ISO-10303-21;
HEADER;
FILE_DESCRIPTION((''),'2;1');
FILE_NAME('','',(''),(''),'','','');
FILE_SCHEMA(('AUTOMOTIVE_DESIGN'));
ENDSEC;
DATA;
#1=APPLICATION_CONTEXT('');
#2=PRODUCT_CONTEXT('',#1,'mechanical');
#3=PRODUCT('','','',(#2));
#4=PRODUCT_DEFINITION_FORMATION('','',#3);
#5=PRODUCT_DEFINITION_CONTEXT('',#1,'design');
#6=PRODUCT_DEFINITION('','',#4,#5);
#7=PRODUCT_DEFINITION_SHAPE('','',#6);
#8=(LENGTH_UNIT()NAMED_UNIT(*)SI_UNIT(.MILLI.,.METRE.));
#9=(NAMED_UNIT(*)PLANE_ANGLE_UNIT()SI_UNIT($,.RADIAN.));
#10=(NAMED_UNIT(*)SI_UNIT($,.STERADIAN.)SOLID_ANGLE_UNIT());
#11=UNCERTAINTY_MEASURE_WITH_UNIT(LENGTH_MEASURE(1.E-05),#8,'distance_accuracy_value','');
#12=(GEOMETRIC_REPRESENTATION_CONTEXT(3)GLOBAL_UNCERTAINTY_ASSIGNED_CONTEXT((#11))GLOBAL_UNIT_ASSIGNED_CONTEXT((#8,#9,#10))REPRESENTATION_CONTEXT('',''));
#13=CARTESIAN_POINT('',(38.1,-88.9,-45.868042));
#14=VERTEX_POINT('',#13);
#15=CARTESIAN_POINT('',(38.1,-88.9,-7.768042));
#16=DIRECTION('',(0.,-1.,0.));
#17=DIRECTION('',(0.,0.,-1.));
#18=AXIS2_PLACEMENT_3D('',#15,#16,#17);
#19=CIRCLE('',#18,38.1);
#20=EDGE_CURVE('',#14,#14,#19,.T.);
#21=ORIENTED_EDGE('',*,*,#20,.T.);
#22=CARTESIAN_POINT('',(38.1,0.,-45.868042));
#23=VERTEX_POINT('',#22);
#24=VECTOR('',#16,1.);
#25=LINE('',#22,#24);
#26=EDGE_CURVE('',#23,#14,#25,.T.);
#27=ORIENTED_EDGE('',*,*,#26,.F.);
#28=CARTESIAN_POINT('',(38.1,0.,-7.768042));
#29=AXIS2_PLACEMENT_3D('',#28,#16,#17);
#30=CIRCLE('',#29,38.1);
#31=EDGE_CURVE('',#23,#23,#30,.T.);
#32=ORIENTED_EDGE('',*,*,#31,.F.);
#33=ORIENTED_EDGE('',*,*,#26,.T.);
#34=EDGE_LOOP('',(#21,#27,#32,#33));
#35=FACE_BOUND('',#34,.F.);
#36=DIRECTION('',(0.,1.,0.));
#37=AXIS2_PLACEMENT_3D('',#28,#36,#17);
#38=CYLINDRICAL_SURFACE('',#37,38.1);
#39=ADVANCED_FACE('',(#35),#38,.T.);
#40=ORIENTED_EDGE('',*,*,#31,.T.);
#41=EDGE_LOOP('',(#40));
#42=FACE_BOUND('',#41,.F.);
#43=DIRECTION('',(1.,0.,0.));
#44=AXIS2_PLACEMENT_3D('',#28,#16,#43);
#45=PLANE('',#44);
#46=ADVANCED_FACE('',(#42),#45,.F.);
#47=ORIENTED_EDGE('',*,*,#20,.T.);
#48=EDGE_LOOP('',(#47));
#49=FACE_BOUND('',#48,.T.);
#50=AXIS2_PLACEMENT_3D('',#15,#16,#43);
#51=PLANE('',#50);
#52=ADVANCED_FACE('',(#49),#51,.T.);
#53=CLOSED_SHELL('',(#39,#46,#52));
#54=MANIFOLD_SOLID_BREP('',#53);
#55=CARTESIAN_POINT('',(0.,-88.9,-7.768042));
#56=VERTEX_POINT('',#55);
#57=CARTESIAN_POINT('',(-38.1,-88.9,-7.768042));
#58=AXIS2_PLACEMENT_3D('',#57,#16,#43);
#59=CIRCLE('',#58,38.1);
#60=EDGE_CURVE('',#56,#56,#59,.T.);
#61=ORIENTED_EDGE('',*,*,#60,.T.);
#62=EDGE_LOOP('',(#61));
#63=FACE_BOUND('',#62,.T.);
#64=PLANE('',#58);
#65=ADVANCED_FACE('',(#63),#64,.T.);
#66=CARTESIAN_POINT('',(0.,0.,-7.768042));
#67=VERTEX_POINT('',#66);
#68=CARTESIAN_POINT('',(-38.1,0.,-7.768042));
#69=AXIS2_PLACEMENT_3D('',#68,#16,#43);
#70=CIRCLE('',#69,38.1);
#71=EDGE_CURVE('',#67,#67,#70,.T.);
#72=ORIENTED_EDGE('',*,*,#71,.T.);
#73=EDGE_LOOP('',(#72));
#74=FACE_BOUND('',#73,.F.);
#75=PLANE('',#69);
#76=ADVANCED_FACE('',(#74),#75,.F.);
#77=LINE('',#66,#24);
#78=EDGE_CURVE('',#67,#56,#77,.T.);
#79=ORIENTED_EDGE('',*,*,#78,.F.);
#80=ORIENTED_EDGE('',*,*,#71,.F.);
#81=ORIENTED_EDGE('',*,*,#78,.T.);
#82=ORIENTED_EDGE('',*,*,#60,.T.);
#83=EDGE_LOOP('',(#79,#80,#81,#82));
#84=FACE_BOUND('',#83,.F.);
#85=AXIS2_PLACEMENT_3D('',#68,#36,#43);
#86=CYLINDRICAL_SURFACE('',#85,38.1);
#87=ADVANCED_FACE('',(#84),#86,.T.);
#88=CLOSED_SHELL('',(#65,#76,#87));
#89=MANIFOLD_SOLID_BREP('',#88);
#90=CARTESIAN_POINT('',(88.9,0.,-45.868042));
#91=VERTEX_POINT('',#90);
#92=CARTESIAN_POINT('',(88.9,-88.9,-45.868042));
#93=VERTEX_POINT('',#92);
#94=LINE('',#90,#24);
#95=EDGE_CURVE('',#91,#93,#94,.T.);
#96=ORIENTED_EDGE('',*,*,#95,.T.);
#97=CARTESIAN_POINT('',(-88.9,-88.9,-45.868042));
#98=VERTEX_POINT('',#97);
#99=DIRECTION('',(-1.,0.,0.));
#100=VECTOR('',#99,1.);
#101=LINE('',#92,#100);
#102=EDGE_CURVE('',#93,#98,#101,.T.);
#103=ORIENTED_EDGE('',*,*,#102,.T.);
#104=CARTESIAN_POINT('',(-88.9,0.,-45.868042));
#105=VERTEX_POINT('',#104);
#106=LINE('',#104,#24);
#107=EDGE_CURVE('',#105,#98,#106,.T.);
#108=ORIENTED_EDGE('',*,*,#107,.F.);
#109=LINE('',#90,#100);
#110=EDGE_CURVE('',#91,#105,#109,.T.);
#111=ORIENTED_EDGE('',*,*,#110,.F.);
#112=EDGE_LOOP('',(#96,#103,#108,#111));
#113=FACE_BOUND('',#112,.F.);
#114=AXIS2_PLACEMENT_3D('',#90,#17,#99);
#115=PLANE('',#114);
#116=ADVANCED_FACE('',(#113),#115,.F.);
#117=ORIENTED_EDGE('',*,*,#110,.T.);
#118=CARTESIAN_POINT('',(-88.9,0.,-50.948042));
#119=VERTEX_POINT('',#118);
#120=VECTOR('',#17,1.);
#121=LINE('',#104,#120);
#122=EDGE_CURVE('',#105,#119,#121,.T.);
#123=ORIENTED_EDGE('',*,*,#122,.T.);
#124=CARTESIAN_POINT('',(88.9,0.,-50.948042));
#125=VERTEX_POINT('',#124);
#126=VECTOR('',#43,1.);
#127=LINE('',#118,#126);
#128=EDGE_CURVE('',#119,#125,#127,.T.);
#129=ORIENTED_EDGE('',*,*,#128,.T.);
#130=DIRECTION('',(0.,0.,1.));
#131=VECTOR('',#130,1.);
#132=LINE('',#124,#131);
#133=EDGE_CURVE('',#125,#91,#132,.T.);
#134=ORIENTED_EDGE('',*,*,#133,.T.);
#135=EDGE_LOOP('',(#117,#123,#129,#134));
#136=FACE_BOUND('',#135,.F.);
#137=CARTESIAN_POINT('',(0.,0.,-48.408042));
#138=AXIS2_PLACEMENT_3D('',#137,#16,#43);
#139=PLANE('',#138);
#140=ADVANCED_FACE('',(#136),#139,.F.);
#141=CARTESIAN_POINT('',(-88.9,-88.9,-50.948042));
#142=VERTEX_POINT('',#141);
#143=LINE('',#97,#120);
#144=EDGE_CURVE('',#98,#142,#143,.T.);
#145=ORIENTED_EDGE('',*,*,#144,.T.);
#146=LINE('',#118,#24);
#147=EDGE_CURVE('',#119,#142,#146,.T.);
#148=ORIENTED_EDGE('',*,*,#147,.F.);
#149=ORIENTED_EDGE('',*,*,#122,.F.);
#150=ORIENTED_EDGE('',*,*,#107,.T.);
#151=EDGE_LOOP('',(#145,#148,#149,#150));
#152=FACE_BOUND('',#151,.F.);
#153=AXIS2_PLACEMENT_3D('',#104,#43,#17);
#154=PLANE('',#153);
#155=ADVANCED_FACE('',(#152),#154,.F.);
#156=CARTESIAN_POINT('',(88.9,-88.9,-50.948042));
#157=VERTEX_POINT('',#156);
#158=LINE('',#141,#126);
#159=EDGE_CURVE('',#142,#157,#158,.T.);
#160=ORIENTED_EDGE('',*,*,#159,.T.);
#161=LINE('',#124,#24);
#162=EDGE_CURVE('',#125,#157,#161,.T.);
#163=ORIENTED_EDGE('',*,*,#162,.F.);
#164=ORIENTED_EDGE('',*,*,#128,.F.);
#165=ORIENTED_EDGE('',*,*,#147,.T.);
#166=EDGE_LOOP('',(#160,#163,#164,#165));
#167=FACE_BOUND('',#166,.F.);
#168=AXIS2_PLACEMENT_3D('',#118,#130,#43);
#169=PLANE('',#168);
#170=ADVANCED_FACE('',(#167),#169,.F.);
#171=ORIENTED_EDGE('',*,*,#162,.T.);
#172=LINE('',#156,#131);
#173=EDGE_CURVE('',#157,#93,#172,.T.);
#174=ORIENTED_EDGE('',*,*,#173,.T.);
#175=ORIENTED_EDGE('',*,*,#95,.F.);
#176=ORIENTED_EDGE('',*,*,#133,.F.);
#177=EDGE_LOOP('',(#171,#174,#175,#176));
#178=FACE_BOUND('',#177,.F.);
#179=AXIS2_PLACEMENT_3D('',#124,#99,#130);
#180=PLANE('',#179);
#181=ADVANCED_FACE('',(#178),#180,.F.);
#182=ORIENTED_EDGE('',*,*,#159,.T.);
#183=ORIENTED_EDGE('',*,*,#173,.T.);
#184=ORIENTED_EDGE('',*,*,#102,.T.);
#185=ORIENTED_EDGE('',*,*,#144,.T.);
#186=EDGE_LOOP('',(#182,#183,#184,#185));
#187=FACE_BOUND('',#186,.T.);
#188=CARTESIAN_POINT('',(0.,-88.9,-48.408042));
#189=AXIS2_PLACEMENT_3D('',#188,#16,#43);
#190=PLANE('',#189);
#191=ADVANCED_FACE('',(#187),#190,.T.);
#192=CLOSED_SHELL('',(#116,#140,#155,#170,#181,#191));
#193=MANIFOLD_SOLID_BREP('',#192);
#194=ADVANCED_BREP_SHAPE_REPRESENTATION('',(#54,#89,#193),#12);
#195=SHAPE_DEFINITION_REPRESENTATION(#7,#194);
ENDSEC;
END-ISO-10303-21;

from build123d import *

# Parameters (mm, degrees)
F1_DEPTH = 88.9


# Not quite as in the source:
# - a feature names something its author has since deleted; it is built from what else it names


with BuildPart() as f1:
    # F0 (on Front) → F1 (new body)
    with BuildSketch(Plane.XZ):
        with BuildLine():
            ThreePointArc((-38.1, -45.8680424225), (-11.1592316368, -34.7088107857), (0, -7.7680424225))
            ThreePointArc((0, -7.7680424225), (-65.0407683632, 19.1727259407), (-38.1, -45.8680424225))
        make_face()
    extrude(amount=F1_DEPTH)


with BuildPart() as f1b:
    # F0 (on Front) → F1, piece 2 (new body)
    with BuildSketch(Plane.XZ):
        with BuildLine():
            ThreePointArc((76.2, -7.7680424225), (38.1, 30.3319575775), (0, -7.7680424225))
            ThreePointArc((0, -7.7680424225), (11.1592316368, -34.7088107857), (38.1, -45.8680424225))
            ThreePointArc((38.1, -45.8680424225), (65.0407683632, -34.7088107857), (76.2, -7.7680424225))
        make_face()
    extrude(amount=F1_DEPTH)


with BuildPart() as f1c:
    # F0 (on Front) → F1, piece 3 (new body)
    with BuildSketch(Plane.XZ):
        Polygon((38.1, -45.8680424225), (-38.1, -45.8680424225), (-88.9, -45.8680424225), (-88.9, -50.9480424225), (88.9, -50.9480424225), (88.9, -45.8680424225), align=None)
    extrude(amount=F1_DEPTH)


solid = Compound([f1.part, f1b.part, f1c.part])
